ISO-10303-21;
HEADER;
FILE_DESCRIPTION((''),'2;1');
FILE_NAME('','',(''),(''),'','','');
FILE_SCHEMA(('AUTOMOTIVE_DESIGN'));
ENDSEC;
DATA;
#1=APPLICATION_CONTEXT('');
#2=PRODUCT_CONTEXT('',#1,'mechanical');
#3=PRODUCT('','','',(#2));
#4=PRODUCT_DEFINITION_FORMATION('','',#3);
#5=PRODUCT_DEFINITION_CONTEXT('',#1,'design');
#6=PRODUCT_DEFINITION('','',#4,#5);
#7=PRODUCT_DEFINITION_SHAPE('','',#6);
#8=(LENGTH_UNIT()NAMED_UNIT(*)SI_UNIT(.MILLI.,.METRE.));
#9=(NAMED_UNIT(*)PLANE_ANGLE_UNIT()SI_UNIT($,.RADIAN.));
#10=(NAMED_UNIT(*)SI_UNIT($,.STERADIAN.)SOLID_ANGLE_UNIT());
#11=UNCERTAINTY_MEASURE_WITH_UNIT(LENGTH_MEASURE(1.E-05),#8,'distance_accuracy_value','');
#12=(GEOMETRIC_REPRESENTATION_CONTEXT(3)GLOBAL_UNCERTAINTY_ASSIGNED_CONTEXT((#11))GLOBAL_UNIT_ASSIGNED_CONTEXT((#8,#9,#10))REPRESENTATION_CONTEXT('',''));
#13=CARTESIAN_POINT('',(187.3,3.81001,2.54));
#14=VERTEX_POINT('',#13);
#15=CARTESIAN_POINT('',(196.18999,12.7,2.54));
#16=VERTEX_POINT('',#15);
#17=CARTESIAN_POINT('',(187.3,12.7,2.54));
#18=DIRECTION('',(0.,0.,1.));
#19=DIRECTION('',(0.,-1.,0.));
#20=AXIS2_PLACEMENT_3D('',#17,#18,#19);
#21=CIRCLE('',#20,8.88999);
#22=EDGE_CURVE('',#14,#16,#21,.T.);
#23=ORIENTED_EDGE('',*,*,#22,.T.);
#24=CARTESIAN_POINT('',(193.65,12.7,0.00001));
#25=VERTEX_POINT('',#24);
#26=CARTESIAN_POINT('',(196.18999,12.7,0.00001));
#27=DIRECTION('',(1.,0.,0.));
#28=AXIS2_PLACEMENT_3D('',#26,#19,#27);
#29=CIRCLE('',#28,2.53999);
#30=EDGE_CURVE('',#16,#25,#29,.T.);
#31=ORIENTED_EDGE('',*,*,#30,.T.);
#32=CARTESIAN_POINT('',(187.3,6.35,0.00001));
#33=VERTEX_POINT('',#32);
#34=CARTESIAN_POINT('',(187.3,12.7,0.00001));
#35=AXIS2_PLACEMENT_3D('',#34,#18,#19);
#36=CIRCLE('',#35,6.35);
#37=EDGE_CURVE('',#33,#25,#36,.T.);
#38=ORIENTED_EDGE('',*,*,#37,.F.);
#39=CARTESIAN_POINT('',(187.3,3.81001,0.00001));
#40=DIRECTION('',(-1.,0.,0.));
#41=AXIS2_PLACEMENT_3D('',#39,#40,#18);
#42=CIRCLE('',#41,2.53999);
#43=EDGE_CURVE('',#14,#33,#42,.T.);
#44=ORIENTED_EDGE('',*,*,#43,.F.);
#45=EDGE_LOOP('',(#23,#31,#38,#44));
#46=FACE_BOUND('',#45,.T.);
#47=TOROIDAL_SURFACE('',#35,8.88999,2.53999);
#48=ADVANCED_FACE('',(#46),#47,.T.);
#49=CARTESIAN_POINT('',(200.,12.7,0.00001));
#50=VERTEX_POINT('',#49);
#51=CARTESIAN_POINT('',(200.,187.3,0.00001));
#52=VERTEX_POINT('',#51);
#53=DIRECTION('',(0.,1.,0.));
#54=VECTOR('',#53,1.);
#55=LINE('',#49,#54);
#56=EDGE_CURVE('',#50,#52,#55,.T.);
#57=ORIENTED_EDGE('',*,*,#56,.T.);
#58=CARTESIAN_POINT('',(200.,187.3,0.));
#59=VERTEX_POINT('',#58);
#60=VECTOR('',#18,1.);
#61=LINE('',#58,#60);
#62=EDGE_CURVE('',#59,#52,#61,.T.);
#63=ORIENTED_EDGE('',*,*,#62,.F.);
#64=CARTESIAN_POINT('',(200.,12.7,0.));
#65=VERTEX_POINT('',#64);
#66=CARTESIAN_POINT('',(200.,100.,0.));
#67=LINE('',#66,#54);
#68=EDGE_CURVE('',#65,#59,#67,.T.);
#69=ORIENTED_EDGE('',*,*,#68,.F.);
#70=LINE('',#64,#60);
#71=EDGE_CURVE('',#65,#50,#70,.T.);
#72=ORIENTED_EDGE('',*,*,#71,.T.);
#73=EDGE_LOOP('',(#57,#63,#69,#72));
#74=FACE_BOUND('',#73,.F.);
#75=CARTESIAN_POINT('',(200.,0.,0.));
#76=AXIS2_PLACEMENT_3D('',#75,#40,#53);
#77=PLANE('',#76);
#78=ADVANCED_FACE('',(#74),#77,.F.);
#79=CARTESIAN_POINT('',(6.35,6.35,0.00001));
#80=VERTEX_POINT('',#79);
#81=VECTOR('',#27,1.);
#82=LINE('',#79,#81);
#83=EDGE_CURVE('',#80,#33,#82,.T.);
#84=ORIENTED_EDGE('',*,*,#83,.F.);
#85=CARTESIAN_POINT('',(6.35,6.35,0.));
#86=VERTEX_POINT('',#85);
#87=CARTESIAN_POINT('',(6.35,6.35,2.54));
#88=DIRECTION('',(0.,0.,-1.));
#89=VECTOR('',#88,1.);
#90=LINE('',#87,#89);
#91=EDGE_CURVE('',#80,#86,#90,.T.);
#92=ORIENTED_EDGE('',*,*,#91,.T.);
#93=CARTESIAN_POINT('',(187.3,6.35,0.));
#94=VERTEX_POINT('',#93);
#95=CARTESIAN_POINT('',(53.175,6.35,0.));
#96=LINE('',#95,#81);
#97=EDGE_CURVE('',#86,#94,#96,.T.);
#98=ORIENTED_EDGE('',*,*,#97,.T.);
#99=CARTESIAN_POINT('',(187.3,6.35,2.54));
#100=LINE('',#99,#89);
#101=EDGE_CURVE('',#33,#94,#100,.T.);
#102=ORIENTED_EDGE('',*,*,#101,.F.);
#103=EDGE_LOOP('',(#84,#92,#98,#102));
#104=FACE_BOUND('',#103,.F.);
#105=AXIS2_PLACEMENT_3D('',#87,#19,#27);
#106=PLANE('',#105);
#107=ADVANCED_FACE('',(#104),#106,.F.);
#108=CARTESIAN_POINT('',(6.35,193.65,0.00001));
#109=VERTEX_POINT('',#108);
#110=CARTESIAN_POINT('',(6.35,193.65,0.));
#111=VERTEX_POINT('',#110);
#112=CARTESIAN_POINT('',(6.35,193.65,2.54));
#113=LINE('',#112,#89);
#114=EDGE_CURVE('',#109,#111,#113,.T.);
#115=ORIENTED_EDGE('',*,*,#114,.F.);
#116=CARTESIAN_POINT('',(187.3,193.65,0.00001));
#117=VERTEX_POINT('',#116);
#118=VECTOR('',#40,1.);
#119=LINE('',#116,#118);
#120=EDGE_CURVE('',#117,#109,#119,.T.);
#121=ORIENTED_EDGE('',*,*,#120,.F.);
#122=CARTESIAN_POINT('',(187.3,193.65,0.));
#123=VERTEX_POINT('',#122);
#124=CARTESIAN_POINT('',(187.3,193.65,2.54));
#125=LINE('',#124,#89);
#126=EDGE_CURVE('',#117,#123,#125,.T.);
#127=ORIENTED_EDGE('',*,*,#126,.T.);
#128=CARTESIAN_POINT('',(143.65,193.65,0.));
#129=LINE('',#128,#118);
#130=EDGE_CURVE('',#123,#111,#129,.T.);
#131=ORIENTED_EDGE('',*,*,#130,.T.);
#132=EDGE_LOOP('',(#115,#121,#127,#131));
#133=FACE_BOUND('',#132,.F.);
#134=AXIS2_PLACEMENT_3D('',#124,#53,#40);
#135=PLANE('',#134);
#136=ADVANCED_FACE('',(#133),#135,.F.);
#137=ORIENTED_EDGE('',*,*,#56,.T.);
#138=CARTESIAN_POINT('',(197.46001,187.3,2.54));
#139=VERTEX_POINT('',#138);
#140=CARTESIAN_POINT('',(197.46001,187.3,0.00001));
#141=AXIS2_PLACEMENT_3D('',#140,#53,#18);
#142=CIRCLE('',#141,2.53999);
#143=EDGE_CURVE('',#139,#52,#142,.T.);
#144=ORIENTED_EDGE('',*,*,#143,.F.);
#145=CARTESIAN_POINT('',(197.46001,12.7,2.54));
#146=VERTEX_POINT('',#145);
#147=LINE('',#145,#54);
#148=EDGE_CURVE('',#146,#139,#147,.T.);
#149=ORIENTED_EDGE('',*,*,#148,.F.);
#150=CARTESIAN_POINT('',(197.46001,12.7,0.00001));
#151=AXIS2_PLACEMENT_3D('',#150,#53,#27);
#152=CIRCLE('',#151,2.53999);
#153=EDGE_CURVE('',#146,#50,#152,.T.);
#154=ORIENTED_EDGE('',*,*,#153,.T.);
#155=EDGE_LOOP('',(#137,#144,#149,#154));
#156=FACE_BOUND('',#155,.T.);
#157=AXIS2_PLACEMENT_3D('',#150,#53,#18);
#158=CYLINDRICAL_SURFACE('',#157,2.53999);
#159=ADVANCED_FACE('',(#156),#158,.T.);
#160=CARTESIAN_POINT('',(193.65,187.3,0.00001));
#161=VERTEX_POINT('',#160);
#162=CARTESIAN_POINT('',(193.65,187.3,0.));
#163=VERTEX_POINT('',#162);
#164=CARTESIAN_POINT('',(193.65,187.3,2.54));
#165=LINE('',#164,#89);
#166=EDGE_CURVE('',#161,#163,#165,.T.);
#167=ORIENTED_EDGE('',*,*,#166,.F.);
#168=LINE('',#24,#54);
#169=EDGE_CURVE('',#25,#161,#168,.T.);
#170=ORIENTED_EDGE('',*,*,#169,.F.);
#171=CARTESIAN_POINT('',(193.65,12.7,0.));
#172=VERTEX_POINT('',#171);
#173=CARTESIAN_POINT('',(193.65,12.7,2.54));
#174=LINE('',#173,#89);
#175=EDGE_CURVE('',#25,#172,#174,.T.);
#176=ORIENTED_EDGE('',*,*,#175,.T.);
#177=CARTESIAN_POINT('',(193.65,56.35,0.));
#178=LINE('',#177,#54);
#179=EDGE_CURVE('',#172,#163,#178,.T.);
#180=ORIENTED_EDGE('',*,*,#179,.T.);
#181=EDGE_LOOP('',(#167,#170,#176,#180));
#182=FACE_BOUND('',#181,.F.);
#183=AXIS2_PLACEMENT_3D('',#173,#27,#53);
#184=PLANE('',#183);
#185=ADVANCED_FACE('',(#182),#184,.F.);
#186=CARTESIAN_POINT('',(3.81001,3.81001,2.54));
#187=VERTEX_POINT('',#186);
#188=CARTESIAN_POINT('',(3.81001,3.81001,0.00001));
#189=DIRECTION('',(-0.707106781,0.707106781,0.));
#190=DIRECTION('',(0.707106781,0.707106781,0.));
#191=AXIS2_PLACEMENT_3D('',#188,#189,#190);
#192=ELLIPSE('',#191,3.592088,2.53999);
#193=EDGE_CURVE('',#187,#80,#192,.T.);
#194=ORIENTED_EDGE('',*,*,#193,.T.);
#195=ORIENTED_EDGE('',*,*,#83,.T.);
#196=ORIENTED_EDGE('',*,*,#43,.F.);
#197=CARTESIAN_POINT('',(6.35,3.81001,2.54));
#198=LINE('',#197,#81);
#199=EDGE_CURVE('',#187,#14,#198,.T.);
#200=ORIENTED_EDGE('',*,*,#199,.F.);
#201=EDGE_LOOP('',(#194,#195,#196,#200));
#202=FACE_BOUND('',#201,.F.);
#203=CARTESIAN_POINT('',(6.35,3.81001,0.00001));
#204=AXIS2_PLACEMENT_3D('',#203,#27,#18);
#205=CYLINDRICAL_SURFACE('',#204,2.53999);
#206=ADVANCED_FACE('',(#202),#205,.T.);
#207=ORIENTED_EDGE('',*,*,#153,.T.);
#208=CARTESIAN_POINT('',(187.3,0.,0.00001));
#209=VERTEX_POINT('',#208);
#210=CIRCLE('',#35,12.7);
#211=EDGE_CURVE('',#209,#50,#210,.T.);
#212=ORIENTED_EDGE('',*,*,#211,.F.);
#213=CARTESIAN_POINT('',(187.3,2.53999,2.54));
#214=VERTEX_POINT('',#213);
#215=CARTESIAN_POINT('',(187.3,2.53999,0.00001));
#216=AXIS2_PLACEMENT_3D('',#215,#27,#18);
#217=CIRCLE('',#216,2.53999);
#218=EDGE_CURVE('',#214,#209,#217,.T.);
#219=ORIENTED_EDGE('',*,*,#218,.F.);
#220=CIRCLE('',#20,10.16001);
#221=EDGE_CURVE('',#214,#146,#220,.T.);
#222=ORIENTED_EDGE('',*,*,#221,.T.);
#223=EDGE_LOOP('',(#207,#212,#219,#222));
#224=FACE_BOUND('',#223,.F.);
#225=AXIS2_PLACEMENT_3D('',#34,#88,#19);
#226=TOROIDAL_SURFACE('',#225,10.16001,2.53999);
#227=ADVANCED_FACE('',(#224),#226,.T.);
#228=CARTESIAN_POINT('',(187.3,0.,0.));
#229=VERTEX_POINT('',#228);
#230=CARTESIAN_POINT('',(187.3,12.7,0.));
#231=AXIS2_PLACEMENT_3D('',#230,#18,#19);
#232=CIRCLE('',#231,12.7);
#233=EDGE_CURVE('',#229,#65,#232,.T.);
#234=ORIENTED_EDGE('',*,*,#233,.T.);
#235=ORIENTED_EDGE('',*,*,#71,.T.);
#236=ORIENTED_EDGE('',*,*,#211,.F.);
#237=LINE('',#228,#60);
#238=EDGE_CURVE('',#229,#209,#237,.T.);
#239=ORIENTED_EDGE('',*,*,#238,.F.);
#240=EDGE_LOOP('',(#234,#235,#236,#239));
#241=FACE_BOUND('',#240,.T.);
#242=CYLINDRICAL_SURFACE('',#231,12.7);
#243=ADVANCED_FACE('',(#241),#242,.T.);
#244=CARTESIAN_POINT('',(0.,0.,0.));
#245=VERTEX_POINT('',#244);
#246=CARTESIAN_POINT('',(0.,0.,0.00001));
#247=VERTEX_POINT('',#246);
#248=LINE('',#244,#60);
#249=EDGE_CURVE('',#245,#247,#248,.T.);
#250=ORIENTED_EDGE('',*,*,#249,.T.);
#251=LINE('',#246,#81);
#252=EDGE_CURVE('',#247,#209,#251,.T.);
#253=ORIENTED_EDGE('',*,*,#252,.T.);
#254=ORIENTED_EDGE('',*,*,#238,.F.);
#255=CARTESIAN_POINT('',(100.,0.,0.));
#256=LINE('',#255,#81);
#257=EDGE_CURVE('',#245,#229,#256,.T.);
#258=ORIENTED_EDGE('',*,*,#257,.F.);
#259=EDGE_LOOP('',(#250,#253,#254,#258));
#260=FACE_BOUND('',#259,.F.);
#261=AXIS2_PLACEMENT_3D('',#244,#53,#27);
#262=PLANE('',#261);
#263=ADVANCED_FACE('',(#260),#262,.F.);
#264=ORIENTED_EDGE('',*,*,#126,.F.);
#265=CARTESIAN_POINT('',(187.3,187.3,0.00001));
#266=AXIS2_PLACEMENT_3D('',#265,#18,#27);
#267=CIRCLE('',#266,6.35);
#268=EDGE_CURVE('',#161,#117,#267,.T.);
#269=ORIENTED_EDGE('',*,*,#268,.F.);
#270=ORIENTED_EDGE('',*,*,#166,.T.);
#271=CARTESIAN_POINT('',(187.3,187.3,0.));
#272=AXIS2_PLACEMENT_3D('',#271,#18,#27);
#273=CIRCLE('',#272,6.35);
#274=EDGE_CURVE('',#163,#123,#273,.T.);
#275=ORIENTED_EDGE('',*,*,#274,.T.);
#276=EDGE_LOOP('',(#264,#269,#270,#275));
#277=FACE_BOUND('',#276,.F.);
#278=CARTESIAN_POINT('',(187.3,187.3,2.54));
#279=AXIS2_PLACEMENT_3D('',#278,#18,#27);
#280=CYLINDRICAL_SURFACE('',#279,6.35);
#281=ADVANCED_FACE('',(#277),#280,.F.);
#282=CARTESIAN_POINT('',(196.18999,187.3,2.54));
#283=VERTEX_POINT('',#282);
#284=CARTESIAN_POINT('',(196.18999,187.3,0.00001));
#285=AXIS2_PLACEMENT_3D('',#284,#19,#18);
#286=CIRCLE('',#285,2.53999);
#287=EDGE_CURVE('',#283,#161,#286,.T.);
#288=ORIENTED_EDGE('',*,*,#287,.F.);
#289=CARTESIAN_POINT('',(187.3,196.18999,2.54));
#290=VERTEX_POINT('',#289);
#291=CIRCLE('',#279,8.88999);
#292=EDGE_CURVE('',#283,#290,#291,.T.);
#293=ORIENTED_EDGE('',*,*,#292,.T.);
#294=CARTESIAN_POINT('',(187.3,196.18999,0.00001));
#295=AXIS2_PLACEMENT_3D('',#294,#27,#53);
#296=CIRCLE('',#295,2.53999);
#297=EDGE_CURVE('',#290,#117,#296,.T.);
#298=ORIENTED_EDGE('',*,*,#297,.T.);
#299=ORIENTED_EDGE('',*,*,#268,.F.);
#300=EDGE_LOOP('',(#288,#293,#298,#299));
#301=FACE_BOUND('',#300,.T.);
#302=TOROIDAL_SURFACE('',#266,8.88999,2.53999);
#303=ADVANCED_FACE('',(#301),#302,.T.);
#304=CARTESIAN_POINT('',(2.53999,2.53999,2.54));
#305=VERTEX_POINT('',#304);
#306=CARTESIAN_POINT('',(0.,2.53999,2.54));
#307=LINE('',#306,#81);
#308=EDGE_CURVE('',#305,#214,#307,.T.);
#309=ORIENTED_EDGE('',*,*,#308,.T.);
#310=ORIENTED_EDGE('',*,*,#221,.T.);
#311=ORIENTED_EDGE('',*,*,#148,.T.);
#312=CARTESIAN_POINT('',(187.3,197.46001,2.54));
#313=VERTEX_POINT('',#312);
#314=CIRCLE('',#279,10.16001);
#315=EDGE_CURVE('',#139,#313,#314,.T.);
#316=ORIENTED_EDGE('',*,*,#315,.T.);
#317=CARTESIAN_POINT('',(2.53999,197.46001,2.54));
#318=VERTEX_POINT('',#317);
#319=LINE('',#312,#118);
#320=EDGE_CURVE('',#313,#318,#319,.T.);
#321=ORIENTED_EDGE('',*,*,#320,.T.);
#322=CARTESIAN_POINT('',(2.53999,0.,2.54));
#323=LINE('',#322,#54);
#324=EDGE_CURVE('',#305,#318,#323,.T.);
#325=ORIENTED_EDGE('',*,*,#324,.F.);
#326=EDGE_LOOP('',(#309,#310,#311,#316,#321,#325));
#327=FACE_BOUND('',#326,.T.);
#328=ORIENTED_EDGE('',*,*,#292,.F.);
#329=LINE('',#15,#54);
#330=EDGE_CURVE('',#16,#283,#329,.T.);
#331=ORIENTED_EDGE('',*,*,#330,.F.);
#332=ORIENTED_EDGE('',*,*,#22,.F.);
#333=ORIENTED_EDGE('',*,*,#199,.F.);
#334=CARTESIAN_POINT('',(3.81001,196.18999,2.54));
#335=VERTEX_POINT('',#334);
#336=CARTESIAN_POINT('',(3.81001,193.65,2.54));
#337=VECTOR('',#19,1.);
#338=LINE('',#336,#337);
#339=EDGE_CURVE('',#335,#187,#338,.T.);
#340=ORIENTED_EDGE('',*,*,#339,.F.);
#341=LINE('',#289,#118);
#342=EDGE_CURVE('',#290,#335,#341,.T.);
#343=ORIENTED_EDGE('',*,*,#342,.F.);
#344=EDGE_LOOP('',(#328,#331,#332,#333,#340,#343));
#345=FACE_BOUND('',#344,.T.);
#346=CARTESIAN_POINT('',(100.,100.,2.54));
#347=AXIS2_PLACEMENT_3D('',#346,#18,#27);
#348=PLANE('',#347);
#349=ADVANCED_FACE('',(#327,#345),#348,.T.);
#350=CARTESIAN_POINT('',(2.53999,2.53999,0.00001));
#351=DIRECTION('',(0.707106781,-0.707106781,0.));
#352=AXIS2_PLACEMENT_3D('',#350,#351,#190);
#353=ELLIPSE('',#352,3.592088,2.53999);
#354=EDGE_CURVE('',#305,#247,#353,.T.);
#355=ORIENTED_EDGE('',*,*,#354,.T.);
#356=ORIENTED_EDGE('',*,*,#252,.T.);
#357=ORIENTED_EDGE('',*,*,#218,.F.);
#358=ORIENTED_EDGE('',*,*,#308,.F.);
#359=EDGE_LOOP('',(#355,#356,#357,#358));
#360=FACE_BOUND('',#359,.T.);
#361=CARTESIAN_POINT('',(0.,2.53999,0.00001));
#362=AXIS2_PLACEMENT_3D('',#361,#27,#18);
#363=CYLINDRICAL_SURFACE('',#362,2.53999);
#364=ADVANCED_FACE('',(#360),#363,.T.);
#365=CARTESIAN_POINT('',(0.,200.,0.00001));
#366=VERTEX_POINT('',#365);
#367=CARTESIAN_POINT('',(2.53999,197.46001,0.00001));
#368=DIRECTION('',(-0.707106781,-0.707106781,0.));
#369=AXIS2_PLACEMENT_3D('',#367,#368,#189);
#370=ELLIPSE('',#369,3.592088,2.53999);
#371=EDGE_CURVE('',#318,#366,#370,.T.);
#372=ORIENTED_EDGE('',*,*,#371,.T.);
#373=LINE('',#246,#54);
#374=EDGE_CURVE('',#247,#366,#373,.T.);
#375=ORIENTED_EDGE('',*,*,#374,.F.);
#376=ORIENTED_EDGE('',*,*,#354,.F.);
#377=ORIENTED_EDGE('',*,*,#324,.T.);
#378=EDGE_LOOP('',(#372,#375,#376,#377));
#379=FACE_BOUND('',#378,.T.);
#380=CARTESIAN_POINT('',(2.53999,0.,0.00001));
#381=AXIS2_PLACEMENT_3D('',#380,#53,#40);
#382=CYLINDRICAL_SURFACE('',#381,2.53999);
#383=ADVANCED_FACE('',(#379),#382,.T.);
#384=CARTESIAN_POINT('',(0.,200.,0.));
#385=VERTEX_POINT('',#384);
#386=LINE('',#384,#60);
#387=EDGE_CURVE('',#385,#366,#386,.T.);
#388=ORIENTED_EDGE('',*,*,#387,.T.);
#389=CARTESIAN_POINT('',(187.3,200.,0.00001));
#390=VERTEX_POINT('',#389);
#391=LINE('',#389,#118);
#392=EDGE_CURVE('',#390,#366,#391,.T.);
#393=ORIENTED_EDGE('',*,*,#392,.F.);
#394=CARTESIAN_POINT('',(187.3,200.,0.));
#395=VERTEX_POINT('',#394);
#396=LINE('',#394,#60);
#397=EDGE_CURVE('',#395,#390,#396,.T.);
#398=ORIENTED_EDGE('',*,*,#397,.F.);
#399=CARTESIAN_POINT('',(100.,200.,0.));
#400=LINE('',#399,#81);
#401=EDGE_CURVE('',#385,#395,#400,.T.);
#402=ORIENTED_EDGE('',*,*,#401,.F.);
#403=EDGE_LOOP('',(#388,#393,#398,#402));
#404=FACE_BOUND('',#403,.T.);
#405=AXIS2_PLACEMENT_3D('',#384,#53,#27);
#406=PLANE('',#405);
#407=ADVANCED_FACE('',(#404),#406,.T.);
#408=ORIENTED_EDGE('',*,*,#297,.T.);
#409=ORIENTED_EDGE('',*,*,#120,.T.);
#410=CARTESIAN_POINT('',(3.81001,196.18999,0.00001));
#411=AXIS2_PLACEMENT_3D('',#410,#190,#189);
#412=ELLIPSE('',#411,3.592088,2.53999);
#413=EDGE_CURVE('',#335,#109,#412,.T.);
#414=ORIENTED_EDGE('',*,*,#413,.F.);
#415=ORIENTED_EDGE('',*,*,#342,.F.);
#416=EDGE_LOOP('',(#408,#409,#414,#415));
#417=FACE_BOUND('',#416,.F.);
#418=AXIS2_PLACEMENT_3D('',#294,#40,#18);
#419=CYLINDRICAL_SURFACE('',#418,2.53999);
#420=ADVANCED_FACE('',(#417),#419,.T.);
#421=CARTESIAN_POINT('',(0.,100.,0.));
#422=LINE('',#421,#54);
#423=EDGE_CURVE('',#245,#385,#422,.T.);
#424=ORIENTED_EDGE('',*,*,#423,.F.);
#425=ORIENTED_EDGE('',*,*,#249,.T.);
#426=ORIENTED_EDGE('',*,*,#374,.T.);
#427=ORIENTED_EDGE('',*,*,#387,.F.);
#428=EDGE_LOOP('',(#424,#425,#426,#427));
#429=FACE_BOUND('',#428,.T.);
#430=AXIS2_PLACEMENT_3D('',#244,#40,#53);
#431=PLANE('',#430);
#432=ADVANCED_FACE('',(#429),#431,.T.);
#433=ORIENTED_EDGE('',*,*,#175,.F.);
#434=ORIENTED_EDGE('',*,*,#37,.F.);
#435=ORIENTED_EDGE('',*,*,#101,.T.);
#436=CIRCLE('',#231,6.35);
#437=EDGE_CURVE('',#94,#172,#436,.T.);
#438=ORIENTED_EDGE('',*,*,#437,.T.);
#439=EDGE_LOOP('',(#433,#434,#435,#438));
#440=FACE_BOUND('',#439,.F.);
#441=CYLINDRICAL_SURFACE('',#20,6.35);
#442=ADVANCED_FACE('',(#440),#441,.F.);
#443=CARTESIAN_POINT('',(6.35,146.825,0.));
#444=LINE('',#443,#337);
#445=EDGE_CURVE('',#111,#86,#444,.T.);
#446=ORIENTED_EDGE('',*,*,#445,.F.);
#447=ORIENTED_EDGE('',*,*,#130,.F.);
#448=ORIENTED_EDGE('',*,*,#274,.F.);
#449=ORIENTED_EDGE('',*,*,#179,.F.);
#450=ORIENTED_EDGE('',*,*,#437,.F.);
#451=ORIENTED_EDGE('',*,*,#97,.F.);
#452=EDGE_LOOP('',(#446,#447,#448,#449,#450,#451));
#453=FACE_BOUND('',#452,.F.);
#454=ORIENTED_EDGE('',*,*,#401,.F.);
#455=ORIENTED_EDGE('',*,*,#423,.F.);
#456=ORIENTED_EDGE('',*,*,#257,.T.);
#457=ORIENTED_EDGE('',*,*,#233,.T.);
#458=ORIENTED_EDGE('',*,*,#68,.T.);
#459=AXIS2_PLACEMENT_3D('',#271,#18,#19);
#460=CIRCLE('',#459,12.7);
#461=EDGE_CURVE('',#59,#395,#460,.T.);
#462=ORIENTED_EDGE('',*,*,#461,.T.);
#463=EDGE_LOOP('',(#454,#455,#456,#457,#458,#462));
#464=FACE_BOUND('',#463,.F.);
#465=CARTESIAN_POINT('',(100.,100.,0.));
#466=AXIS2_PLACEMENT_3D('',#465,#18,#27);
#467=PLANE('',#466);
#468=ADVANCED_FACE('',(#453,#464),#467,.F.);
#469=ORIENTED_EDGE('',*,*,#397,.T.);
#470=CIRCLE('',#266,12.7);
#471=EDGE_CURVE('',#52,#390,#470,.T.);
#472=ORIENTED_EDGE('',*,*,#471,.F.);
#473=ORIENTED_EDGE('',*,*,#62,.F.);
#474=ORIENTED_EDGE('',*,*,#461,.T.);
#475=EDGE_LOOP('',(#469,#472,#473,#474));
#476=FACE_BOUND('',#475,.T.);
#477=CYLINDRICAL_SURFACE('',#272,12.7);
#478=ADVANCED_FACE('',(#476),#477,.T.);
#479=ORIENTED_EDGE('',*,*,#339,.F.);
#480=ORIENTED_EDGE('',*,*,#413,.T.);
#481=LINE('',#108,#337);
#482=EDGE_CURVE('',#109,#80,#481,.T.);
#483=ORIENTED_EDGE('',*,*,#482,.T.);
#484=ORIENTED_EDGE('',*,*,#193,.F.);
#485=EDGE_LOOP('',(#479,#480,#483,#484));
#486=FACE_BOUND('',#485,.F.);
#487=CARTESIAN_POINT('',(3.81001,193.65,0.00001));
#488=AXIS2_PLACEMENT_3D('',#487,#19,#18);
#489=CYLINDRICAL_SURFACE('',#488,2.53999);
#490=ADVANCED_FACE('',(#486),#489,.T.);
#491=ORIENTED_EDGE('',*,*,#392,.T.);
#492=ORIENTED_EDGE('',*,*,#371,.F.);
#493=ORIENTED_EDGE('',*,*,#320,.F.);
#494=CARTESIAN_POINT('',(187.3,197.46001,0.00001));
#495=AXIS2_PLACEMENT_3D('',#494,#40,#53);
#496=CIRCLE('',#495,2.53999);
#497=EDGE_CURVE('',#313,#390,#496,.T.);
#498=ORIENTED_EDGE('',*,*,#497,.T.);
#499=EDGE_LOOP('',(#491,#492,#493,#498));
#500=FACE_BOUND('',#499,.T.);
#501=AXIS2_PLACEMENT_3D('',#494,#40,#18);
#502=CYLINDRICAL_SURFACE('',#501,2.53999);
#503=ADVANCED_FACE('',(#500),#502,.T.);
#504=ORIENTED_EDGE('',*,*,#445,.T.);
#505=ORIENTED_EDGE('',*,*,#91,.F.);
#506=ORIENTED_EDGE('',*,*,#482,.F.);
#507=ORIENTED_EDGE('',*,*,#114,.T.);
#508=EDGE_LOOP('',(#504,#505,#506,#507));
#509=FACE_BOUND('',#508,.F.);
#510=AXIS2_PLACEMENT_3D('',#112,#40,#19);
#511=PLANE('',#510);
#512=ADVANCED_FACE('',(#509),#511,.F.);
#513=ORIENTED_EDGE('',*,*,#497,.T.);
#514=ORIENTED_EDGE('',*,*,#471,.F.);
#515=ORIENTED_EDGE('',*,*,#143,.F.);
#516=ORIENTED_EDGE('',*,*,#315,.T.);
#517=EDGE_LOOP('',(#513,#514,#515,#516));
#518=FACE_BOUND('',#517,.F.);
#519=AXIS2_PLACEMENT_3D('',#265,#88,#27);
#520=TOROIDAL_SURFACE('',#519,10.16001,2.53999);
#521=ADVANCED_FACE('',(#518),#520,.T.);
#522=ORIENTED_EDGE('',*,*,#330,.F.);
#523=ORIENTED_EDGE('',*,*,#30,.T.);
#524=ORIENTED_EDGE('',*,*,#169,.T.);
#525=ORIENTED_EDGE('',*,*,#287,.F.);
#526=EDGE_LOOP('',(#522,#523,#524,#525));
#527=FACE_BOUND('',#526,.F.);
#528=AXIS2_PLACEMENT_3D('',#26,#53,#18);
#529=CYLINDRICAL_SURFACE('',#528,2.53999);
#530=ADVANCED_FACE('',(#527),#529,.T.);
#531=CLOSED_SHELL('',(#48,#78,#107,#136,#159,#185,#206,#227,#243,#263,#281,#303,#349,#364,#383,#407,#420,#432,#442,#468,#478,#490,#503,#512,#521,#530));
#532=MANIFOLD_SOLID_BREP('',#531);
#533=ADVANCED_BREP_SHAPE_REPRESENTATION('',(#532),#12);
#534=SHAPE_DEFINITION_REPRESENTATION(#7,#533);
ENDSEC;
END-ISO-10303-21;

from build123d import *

# Parameters (mm, degrees)
F0_W     = 200
F0_H     = 200
F1_DEPTH = 2.54
F2_R     = 12.7
F4_DEPTH = 2.541
F5_R     = 2.53999


# Not quite as in the source:
# - a fillet or chamfer is up to 0.001 mm smaller than in the source, because OpenCascade refuses the exact size


with BuildPart() as f1:
    # F0 (on Top) → F1 (new body)
    with BuildSketch(Plane.XY):
        with Locations((100, 100)):
            Rectangle(F0_W, F0_H)
    extrude(amount=F1_DEPTH)

    # F2
    f2_edges = [f1.edges().sort_by_distance(p)[0] for p in [
        (200, 0, 1.27),
        (200, 200, 1.27),
    ]]
    fillet(f2_edges, radius=F2_R)

    # F3 (on face) → F4 (cut, through all)
    with BuildSketch(Plane.XY.offset(2.54)):
        with BuildLine():
            Line((6.35, 193.65), (6.35, 6.35))
            Line((6.35, 6.35), (187.3, 6.35))
            ThreePointArc((187.3, 6.35), (191.7901280605, 8.2098719395), (193.65, 12.7))
            Line((193.65, 12.7), (193.65, 187.3))
            ThreePointArc((193.65, 187.3), (191.7901280605, 191.7901280605), (187.3, 193.65))
            Line((187.3, 193.65), (6.35, 193.65))
        make_face()
    extrude(amount=-F4_DEPTH, mode=Mode.SUBTRACT)

    # F5 (radius 2.54 in the source; OpenCascade refuses exactly that, so slightly less here)
    f5_edges = [f1.edges().sort_by_distance(p)[0] for p in [
        (96.825, 193.65, 2.54),
        (6.35, 100, 2.54),
        (196.280256, 196.280256, 2.54),
        (0, 100, 2.54),
    ]]
    fillet(f5_edges, radius=F5_R)


solid = f1.part
